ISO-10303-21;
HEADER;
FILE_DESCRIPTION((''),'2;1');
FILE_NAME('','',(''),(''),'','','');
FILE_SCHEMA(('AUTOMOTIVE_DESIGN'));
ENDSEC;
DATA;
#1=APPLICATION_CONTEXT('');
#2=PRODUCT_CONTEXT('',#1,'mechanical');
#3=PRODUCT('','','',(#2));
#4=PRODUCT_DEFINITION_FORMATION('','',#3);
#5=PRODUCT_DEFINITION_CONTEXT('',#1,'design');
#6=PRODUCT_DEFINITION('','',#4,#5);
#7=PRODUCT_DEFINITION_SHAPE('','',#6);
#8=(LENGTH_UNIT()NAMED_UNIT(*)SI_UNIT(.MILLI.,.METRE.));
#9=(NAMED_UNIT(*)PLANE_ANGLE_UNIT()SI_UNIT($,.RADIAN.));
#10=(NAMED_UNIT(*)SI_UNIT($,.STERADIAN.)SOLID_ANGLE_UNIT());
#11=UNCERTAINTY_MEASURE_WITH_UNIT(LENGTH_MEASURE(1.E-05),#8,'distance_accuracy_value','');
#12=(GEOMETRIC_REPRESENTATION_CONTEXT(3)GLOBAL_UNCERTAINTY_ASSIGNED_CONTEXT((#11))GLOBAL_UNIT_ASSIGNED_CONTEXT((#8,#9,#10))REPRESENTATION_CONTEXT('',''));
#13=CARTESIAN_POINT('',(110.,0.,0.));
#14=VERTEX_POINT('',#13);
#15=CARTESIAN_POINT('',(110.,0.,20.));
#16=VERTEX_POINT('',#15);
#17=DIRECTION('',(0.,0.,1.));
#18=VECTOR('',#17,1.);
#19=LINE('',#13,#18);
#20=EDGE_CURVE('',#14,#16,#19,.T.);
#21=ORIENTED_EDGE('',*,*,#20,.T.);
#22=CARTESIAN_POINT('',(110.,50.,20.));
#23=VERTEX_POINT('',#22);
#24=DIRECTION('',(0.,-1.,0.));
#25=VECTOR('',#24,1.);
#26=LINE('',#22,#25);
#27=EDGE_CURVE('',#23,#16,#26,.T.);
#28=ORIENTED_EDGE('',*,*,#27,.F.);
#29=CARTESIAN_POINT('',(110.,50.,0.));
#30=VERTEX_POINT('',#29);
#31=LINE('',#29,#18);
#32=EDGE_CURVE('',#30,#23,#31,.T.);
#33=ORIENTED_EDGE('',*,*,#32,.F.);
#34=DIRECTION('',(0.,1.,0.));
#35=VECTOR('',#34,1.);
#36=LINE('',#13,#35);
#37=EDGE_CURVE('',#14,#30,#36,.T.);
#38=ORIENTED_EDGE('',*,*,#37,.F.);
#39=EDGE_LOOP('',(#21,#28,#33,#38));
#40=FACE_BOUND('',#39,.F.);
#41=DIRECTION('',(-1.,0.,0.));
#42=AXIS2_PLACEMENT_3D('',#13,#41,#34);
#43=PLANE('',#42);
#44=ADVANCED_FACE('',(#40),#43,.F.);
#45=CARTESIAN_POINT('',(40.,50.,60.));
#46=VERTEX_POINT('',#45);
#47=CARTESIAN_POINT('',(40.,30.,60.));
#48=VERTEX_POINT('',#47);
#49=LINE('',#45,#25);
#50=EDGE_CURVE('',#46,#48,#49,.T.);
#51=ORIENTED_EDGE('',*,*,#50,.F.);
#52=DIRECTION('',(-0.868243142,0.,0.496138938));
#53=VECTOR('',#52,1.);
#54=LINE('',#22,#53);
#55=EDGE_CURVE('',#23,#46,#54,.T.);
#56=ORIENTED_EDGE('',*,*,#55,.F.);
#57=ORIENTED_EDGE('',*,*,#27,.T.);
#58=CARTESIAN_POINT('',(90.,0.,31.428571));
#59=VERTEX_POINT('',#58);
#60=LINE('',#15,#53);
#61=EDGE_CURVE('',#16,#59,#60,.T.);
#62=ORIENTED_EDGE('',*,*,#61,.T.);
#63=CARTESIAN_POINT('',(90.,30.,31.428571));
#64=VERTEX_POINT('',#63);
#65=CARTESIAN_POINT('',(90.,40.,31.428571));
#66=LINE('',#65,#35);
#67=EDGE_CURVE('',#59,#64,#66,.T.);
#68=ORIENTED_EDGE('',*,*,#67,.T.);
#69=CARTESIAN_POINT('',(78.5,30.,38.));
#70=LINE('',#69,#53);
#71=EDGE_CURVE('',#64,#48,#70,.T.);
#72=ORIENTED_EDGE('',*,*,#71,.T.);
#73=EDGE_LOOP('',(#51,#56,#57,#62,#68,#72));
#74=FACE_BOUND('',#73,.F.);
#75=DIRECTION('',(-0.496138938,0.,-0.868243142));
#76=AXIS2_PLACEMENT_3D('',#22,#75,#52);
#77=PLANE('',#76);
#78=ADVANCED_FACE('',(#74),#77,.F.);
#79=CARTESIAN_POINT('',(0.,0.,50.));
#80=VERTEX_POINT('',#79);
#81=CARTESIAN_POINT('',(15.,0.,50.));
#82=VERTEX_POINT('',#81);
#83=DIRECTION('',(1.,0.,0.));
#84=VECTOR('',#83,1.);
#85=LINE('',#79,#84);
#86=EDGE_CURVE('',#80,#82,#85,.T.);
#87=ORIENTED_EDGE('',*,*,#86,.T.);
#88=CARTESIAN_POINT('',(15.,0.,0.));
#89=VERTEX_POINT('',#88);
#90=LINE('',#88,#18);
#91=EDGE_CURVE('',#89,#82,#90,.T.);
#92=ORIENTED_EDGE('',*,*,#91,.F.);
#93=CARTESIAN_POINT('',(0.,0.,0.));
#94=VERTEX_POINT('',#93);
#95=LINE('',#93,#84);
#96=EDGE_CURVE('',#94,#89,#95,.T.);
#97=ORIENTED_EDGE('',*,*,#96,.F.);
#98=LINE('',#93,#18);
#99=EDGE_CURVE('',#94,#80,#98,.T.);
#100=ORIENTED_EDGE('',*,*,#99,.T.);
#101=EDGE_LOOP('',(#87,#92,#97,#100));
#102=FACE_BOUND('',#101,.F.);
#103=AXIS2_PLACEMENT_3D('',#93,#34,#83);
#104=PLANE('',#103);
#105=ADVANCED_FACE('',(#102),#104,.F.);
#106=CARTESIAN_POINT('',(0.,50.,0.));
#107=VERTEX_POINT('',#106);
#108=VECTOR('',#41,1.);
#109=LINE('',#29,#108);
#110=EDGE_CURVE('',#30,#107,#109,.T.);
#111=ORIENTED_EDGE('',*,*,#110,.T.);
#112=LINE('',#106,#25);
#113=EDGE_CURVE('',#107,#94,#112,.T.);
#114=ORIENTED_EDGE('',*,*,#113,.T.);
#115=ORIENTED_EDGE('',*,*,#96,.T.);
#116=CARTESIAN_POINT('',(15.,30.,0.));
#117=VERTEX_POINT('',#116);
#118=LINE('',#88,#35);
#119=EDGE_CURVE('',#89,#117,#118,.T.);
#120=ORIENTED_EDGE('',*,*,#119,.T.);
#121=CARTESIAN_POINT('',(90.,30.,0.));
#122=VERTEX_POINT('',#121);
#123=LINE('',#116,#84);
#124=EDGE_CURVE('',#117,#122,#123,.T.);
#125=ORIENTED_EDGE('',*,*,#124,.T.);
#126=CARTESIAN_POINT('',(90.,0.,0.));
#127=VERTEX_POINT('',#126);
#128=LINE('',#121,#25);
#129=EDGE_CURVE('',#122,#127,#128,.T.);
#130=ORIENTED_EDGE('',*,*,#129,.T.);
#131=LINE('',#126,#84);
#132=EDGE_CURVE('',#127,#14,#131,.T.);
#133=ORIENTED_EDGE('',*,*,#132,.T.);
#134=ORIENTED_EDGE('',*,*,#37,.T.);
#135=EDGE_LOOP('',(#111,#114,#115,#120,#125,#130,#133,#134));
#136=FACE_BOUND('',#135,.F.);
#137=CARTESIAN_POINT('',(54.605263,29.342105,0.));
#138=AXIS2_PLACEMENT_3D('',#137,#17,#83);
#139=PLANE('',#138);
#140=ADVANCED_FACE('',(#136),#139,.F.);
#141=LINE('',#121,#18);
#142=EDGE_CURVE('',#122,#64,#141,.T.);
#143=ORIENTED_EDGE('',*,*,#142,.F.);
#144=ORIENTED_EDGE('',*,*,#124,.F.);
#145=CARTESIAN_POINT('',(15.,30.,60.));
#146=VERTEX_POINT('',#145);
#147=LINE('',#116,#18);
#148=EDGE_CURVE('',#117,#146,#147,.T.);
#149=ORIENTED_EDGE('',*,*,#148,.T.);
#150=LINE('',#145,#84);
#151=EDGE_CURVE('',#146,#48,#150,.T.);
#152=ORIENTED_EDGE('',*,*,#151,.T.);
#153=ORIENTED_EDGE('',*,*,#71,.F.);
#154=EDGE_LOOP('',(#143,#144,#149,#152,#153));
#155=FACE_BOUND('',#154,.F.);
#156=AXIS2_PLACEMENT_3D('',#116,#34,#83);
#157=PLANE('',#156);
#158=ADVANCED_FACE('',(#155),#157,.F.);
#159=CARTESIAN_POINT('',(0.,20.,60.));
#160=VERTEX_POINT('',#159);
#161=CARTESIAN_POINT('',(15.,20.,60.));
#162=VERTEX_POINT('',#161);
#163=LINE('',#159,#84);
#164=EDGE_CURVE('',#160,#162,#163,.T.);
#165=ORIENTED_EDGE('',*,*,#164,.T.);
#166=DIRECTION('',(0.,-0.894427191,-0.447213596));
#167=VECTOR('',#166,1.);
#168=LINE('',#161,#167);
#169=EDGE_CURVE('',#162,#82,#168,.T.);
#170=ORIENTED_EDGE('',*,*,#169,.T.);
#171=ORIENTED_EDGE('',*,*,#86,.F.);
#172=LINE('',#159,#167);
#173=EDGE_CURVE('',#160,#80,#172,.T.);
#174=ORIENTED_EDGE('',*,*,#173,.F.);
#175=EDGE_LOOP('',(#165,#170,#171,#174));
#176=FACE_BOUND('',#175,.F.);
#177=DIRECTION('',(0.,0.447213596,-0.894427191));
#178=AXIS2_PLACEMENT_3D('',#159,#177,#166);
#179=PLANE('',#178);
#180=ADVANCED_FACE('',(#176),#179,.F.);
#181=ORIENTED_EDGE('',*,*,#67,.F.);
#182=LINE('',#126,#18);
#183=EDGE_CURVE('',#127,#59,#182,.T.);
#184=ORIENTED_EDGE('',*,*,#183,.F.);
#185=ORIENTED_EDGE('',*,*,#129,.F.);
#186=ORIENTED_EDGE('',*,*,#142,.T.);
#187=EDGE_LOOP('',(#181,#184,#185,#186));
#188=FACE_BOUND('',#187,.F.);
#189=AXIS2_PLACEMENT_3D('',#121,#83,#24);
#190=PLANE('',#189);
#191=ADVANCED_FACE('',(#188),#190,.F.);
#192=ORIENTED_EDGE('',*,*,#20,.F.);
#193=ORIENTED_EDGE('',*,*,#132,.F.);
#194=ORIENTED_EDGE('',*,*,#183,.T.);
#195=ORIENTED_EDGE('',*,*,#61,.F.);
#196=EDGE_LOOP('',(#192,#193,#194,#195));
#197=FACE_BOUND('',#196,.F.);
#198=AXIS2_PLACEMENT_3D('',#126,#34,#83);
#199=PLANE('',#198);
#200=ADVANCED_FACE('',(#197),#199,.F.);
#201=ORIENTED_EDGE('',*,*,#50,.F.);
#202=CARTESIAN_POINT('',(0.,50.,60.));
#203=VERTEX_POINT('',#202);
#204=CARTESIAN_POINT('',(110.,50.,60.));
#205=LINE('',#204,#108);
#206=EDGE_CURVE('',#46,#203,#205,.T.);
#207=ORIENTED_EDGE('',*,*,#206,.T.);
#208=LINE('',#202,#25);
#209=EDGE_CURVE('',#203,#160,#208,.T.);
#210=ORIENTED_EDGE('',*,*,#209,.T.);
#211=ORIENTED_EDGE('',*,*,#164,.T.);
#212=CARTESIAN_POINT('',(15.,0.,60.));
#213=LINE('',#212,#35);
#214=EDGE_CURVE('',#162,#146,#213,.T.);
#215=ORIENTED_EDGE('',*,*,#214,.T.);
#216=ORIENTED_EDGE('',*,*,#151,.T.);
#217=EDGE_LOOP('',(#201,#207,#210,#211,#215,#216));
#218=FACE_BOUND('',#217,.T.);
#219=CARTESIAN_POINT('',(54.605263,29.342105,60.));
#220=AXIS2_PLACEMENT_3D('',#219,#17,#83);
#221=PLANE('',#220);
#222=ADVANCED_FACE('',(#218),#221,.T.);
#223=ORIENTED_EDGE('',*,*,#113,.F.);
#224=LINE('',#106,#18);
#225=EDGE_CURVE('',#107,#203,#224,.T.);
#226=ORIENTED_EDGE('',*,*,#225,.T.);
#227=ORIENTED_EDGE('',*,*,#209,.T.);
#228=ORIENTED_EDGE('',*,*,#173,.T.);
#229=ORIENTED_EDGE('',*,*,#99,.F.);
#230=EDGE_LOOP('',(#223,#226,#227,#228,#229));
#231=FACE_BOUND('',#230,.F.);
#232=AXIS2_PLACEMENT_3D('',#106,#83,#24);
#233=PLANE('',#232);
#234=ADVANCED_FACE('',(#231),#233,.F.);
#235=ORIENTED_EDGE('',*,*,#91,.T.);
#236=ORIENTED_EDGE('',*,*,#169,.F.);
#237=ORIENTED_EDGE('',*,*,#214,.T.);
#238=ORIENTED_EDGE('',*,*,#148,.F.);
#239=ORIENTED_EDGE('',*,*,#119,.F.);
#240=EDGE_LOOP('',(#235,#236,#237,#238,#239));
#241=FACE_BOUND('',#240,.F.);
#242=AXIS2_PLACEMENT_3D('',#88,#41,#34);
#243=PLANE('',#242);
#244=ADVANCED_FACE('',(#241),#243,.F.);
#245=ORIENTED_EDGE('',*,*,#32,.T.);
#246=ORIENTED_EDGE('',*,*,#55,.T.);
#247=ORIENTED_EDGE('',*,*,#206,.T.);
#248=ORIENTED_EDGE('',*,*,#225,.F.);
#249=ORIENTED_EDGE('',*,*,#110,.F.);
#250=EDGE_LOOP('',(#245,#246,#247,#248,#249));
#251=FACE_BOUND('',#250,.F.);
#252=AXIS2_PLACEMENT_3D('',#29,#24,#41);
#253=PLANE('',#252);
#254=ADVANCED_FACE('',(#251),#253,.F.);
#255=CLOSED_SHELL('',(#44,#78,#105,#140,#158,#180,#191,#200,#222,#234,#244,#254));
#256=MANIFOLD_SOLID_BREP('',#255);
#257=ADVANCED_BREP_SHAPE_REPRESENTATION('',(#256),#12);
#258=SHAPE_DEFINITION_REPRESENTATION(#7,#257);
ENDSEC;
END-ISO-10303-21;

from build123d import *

# Parameters (mm, degrees)
F2_DEPTH = 60
F4_DEPTH = 15
F6_DEPTH = 50


# Not quite as in the source:
# - a feature names something its author has since deleted; it is built from what else it names


with BuildPart() as f2:
    # F1 (on Top) → F2 (new body)
    with BuildSketch(Plane.XY):
        Polygon((0, 50), (0, 0), (15, 0), (15, 30), (90, 30), (90, 0), (110, 0), (110, 50), align=None)
    extrude(amount=F2_DEPTH)

    # F3 (on face) → F4 (cut)
    with BuildSketch(Plane(origin=(0, 0, 0), x_dir=(0, -1, 0), z_dir=(-1, 0, 0))):
        Polygon((0, 50), (0, 60), (-20, 60), align=None)
    extrude(amount=-F4_DEPTH, mode=Mode.SUBTRACT)

    # F5 (on face) → F6 (cut)
    with BuildSketch(Plane(origin=(0, 50, 0), x_dir=(-1, 0, 0), z_dir=(0, 1, 0))):
        Polygon((-110, 20), (-40, 60), (-110, 60), align=None)
    extrude(amount=-F6_DEPTH, mode=Mode.SUBTRACT)


solid = f2.part
